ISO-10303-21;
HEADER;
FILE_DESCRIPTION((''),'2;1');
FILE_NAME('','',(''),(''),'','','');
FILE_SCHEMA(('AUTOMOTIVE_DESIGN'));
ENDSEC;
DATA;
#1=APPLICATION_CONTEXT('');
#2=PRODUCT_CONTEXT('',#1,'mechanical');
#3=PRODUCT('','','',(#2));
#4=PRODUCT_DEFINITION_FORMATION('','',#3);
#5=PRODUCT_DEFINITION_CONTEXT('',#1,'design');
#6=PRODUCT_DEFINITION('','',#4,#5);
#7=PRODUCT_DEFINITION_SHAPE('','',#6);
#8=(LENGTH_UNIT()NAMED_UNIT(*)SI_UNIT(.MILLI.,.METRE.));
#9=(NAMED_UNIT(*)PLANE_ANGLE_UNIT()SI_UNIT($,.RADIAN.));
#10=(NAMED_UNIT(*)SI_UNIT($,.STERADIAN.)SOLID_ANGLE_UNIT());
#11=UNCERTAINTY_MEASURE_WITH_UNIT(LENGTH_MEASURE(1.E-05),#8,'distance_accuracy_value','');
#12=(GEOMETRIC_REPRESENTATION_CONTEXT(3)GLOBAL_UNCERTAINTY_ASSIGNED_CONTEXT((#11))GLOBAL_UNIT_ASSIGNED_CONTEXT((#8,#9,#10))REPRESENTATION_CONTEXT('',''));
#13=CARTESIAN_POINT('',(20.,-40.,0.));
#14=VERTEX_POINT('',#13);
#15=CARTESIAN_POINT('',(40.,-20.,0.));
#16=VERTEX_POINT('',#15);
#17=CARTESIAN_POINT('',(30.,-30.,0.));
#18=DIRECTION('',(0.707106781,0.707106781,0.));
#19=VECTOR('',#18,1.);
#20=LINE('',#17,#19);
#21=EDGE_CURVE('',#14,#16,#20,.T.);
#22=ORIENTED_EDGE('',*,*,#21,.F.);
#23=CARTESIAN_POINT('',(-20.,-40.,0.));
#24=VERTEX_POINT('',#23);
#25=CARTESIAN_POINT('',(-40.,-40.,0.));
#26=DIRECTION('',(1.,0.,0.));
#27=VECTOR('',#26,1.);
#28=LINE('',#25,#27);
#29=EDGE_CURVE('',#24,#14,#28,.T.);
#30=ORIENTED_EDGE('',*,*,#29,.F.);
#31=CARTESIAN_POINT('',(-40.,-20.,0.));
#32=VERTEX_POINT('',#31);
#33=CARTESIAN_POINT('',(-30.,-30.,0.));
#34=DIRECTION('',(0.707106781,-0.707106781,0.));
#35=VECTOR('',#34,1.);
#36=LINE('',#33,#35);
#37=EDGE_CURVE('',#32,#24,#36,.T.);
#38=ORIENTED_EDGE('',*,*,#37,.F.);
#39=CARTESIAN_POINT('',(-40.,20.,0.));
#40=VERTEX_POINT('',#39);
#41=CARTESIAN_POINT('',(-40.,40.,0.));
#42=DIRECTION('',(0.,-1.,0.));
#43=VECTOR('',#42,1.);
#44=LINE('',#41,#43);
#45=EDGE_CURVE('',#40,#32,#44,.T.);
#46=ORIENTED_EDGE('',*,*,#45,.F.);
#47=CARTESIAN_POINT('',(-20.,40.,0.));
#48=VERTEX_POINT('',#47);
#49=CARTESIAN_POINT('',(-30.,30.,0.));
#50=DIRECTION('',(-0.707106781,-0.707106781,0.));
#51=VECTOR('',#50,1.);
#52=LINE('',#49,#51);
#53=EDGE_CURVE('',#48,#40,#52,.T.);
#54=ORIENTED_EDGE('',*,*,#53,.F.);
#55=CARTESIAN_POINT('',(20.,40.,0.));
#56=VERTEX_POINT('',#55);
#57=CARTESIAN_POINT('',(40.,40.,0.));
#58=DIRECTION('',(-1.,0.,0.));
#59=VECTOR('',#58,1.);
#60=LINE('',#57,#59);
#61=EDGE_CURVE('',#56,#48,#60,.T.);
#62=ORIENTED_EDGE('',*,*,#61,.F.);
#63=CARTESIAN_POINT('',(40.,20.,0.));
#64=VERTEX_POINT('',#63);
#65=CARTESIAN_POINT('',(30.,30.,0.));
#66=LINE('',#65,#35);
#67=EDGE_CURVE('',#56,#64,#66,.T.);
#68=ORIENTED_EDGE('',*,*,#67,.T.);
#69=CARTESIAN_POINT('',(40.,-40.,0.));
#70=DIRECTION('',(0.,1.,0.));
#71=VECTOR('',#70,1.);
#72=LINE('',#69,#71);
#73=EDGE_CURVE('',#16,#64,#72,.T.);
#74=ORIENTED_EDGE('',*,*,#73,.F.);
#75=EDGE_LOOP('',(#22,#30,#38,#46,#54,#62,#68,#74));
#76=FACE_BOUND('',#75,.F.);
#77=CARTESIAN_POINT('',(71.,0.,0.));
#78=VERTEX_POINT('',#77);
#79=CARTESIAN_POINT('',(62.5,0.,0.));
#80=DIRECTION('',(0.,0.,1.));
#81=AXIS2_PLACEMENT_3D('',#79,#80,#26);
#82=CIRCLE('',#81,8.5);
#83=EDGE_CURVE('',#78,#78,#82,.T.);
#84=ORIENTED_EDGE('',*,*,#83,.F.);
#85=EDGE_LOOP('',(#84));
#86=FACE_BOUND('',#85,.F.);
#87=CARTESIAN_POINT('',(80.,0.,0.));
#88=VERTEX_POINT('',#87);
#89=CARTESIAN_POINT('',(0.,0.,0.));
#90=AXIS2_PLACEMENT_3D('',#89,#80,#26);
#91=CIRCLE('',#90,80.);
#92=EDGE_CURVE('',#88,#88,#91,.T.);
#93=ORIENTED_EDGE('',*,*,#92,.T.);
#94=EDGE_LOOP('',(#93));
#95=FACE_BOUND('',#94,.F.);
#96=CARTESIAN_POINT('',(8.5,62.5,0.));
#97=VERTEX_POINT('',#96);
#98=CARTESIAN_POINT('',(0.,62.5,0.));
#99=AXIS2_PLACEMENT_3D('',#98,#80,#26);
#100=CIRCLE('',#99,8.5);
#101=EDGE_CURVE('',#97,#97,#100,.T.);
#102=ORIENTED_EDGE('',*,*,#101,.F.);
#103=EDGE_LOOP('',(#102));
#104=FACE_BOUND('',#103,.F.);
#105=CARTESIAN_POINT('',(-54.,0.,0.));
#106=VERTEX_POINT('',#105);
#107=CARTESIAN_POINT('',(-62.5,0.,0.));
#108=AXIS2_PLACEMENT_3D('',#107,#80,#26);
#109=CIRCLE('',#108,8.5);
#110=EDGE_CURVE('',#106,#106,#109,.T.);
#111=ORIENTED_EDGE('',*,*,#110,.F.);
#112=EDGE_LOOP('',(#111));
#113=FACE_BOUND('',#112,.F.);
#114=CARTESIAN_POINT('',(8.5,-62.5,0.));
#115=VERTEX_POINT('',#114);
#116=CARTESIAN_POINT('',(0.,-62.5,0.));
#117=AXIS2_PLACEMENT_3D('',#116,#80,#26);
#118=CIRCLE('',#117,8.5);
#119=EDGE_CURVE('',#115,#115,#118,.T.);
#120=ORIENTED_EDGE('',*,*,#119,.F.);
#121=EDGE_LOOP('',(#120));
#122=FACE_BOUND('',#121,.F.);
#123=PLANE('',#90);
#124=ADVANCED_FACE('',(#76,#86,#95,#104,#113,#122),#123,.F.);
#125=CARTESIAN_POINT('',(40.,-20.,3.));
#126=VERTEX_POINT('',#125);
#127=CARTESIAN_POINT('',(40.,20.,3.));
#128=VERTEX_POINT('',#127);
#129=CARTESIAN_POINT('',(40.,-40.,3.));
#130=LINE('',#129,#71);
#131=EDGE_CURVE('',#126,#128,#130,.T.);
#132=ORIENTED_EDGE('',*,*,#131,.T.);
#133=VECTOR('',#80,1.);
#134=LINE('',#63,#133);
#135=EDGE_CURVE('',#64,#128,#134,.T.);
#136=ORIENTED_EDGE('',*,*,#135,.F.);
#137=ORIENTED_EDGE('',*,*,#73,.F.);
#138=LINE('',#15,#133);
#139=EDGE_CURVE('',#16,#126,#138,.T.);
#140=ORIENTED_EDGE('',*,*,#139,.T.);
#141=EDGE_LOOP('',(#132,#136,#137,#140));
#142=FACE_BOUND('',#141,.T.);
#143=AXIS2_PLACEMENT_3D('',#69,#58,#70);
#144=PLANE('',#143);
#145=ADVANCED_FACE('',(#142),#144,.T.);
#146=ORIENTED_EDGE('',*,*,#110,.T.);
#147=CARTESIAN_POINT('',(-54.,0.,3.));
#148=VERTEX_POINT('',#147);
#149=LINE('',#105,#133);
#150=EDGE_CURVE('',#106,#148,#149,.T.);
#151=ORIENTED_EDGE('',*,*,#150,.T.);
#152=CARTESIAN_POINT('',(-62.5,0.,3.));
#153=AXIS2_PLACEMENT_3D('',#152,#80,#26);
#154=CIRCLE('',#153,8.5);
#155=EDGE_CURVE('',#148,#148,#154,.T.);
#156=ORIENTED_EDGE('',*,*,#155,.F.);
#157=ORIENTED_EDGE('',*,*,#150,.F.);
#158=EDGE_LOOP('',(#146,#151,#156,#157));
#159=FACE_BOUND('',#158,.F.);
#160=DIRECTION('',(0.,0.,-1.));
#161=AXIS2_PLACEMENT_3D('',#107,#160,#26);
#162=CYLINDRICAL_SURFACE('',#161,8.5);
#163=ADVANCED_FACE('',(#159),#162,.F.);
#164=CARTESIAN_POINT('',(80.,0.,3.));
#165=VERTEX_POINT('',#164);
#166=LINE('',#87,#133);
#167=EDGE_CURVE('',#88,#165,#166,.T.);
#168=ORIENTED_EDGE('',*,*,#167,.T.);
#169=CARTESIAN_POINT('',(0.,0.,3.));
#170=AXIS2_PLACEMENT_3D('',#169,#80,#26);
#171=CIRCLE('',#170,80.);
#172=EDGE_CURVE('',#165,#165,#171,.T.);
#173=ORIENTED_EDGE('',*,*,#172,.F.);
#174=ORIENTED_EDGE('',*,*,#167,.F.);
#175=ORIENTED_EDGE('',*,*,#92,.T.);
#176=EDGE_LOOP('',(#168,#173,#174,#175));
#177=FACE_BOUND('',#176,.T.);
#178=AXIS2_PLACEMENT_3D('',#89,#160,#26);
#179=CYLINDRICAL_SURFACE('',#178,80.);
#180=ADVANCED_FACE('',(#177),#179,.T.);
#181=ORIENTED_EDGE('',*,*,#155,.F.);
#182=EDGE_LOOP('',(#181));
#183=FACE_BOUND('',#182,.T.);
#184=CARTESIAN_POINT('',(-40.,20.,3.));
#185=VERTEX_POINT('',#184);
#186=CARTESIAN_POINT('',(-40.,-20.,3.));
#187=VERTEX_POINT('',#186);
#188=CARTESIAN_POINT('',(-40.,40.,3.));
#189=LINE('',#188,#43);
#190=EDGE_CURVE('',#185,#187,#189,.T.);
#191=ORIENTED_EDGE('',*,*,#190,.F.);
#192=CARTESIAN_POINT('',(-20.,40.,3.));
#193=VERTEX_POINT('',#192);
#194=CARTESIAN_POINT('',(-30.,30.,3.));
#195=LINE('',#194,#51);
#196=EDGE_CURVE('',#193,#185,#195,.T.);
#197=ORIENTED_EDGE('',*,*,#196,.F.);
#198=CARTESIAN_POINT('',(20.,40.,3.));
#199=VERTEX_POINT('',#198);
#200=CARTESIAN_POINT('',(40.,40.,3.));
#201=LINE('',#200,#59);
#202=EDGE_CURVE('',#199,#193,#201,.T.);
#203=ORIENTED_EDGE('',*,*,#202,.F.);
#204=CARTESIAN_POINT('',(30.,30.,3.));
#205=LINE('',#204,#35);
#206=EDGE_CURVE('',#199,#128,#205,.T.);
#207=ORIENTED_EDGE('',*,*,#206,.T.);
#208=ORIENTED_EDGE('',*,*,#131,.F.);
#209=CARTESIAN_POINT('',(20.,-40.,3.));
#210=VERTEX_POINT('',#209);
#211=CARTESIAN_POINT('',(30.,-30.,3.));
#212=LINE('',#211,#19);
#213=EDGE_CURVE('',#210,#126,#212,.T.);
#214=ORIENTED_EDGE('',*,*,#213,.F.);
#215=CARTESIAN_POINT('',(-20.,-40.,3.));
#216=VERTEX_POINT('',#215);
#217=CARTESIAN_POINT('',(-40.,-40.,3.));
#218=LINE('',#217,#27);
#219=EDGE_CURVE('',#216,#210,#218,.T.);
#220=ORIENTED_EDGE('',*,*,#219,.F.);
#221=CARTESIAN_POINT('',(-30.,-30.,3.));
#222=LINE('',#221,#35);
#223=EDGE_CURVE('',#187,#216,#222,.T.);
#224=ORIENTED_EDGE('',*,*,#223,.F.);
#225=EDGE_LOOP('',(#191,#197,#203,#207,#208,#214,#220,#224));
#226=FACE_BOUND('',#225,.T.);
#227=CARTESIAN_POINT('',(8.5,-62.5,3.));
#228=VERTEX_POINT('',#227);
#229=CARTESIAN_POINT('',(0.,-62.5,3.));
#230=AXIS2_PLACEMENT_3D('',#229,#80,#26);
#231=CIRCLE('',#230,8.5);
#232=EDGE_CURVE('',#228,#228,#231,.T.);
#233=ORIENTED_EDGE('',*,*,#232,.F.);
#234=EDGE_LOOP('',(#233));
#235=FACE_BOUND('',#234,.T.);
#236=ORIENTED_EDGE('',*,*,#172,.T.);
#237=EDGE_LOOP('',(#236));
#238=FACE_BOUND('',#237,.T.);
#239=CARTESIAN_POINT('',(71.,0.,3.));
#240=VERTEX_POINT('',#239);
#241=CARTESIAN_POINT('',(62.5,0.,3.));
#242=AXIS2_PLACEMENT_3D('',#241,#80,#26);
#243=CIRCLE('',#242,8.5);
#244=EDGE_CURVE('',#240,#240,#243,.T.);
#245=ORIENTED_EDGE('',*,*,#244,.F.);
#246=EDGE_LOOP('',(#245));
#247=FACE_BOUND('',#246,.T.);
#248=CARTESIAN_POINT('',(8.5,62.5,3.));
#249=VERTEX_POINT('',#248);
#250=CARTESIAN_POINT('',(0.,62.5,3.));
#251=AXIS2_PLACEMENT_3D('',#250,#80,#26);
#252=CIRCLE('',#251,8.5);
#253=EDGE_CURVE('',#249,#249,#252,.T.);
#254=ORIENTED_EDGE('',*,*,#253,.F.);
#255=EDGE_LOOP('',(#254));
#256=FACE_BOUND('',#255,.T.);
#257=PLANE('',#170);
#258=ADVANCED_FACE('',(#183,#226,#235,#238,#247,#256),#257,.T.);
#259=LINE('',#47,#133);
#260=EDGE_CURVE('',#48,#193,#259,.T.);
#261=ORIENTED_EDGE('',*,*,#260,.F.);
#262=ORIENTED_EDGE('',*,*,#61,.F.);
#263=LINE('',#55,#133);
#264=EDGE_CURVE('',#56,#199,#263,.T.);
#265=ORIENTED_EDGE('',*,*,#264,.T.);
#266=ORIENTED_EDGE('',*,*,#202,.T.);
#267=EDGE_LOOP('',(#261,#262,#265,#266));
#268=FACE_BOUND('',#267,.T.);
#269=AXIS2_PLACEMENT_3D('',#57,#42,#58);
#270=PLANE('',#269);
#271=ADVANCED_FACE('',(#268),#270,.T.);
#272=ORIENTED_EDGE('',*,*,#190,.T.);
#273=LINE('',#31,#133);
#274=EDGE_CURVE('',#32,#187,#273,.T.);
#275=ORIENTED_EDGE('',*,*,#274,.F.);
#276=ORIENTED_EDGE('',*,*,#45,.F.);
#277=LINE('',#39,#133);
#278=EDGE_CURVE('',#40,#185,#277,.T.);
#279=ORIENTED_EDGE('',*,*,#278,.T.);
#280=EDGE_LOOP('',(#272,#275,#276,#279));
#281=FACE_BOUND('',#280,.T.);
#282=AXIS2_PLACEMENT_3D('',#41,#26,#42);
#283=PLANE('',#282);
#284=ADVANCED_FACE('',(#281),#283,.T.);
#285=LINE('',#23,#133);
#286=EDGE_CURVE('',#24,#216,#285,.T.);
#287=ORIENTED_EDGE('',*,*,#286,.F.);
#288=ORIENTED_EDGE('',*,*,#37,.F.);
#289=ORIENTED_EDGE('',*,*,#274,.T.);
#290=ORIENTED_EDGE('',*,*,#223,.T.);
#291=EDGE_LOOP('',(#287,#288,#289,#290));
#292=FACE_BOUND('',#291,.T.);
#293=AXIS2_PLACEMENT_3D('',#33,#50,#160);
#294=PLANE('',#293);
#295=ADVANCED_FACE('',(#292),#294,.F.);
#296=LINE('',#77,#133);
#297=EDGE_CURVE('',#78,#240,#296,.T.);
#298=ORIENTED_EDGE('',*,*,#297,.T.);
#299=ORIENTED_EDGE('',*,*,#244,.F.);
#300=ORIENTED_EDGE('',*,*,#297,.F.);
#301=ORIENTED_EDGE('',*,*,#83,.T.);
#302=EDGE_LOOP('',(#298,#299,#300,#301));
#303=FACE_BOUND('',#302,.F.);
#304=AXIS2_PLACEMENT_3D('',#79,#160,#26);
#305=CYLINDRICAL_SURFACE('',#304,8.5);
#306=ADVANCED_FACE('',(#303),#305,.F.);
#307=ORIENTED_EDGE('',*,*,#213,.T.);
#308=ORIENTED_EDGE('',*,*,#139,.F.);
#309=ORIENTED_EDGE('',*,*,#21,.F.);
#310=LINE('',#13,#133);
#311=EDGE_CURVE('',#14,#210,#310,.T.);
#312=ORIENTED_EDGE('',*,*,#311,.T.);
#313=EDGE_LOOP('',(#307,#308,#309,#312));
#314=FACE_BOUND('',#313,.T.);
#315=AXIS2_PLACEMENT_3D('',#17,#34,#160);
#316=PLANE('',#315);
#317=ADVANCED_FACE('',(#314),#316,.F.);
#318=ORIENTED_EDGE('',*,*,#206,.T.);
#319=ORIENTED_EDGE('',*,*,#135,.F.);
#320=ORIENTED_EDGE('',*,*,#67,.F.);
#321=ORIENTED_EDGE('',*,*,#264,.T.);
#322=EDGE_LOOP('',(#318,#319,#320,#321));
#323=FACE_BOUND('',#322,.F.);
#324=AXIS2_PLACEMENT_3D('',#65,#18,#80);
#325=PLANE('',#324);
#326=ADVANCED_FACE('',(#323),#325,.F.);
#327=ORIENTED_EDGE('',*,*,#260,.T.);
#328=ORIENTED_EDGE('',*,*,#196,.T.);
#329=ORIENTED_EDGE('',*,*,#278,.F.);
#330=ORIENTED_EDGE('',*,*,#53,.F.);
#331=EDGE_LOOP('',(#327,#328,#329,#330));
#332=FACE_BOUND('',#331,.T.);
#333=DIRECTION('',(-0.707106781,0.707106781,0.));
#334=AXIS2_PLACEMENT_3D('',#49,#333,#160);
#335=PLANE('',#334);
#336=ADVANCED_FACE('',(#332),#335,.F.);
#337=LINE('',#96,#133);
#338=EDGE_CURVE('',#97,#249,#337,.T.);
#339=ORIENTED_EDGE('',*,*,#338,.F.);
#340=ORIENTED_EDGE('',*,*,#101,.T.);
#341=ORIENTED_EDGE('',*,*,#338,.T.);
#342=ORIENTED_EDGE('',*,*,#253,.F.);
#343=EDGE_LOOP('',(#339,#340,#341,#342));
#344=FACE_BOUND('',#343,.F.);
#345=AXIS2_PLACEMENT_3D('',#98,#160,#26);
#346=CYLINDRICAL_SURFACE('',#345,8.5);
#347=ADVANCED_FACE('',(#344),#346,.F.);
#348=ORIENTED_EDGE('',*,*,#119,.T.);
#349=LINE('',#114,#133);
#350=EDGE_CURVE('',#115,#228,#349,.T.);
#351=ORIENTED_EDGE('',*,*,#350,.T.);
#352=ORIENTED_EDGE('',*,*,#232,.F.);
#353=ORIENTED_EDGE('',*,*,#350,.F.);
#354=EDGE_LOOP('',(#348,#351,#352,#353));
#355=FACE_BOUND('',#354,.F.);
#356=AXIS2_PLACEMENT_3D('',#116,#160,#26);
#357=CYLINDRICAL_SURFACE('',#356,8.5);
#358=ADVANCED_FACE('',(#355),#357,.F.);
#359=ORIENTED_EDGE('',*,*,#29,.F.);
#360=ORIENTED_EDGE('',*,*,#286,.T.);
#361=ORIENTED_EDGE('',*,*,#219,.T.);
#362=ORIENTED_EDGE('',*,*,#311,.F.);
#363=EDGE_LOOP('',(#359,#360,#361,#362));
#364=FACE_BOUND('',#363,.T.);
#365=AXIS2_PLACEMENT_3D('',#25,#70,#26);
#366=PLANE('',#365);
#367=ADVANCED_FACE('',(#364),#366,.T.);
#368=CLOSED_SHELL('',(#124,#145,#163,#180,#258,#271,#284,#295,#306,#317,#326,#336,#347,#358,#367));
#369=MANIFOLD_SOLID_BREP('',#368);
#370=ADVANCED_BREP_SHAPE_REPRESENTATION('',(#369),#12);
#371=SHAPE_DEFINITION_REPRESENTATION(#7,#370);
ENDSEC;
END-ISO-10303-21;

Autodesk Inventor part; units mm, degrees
ref_plane "YZ Plane" through (0, 0, 0) normal (1, 0, 0) x (0, 1, 0)
ref_plane "XZ Plane" through (0, 0, 0) normal (0, 1, 0) x (-1, 0, 0)
ref_plane "XY Plane" through (0, 0, 0) normal (0, 0, 1) x (1, 0, 0)
sketch "Sketch1" plane through (0, 0, 0) normal (0, 0, 1) x (1, 0, 0)
  circle A0 centre (0, 0) radius 80
  line L0 (40, 40) -> (-40, 40)
  line L1 (-40, 40) -> (-40, -40)
  line L2 (-40, -40) -> (40, -40)
  line L3 (40, -40) -> (40, 40)
  line L4 (40, 40) -> (-40, -40) construction
  line L5 (-40, 40) -> (40, -40) construction
  circle A1 centre (-62.5, 0) radius 8.5
  circle A2 centre (0, 0) radius 62.5 construction
  circle A3 centre (0, -62.5) radius 8.5
  circle A4 centre (62.5, 0) radius 8.5
  circle A5 centre (0, 62.5) radius 8.5
  dimension "d171" = 125
  dimension "d157" = 160
  dimension "d158" = 80
  dimension "d159" = 80
  dimension "d170" = 17
  dimension "d174" = 360
extrude "Plate5" add sketch "Sketch1" along normal blind 3
chamfer "Corner Chamfer2" distance 20 angle 45 4 edges at (-40, -40, 1.5) (40, -40, 1.5) (-40, 40, 1.5) (40, 40, 1.5)
properties part number "SLM 1651 FDS MAIN  FLANGE" material "Stainless Steel"
